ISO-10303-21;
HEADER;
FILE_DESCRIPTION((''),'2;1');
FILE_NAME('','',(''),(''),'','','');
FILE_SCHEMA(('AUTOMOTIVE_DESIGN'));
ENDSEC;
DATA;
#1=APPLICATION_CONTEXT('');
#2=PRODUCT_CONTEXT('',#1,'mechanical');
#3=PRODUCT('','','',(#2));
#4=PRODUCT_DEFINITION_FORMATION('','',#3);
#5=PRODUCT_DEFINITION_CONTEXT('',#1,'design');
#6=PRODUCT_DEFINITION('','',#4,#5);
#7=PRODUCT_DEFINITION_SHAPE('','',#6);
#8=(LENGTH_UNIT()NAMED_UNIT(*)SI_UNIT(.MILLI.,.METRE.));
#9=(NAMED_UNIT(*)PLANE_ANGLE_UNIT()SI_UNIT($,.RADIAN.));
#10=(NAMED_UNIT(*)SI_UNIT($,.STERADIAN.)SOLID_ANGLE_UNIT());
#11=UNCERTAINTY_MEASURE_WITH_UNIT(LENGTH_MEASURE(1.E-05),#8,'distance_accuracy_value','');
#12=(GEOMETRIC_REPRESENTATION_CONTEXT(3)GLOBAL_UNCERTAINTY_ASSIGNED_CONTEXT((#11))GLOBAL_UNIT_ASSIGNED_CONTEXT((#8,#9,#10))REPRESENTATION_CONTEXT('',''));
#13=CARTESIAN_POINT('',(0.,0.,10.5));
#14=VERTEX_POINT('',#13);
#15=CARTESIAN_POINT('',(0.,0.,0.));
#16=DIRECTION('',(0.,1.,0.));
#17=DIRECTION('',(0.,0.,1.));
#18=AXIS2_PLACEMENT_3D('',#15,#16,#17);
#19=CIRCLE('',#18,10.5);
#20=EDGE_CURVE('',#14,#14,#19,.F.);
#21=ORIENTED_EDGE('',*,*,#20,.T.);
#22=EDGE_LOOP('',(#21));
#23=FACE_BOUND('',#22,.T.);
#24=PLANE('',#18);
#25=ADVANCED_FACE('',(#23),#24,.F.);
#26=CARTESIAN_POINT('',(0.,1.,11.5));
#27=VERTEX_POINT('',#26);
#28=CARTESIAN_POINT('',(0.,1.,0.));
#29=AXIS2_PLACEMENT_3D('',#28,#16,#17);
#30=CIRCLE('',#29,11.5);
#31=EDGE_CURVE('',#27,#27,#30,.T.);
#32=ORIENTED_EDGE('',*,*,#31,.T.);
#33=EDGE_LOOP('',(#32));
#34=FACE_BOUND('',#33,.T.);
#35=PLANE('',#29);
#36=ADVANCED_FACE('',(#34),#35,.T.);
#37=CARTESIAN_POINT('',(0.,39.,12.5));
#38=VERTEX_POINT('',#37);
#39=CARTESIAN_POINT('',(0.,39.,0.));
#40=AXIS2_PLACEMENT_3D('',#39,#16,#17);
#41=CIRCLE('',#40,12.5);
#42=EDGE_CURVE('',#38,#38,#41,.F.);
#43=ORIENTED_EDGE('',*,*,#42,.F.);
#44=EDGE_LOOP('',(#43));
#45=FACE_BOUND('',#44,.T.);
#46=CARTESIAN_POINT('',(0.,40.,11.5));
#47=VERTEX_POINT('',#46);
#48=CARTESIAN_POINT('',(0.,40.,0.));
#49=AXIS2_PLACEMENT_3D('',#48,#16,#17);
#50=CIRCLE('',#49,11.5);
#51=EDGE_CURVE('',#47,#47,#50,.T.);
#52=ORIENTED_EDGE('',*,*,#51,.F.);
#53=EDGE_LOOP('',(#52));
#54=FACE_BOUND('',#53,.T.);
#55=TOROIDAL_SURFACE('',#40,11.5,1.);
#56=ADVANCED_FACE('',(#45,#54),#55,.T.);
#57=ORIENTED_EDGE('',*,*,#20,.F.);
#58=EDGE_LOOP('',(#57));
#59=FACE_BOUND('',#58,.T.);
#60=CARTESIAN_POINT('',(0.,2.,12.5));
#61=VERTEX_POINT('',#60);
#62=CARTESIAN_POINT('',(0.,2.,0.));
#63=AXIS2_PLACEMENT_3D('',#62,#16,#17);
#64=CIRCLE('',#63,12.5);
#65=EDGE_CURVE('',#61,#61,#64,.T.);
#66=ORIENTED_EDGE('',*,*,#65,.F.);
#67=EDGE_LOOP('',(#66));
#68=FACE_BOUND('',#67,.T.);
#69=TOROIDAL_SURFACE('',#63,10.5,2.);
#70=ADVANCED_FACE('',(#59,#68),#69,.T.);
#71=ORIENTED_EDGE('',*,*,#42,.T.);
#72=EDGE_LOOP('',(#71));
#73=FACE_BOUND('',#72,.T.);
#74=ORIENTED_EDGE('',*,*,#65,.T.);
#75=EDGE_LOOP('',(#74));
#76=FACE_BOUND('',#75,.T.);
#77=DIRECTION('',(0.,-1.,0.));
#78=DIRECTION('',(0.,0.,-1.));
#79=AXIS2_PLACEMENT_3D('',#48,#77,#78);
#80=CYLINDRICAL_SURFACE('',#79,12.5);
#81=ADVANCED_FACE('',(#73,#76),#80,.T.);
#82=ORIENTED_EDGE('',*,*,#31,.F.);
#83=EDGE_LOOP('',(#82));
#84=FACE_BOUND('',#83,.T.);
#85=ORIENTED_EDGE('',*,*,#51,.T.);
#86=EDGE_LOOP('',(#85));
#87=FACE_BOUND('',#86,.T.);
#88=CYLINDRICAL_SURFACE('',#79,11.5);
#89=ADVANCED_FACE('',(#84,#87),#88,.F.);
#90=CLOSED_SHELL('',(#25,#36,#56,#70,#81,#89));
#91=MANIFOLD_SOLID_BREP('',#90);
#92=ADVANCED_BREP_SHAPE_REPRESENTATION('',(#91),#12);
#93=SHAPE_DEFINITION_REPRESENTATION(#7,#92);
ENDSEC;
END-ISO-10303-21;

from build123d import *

# Parameters (mm, degrees)
SKETCH1_R           = 12.5
BOSS_EXTRUDE1_DEPTH = 40
SHELL1_T            = -1
FILLET1_R           = 2
FILLET7_R           = 1


with BuildPart() as part:
    # Sketch1 → Boss-Extrude1 (new body)
    with BuildSketch(Plane(origin=(0, 0, 0), x_dir=(1, 0, 0), z_dir=(0, 1, 0))):
        with Locations(Location((0, 0, 0), (0, 0, 270))):
            Circle(SKETCH1_R)
    extrude(amount=BOSS_EXTRUDE1_DEPTH)

    # Shell1
    shell1_openings = [part.faces().sort_by_distance(p)[0] for p in [
        (0, 40, 0),
    ]]
    offset(amount=SHELL1_T, openings=shell1_openings, kind=Kind.INTERSECTION)

    # Fillet1
    fillet1_edges = [part.edges().sort_by_distance(p)[0] for p in [
        (0, 0, -12.5),
    ]]
    fillet(fillet1_edges, radius=FILLET1_R)

    # Fillet7
    fillet7_edges = [part.edges().sort_by_distance(p)[0] for p in [
        (0, 40, -12.5),
    ]]
    fillet(fillet7_edges, radius=FILLET7_R - 0.0001)  # a hair under: the kernel refuses the full size


solid = part.part
